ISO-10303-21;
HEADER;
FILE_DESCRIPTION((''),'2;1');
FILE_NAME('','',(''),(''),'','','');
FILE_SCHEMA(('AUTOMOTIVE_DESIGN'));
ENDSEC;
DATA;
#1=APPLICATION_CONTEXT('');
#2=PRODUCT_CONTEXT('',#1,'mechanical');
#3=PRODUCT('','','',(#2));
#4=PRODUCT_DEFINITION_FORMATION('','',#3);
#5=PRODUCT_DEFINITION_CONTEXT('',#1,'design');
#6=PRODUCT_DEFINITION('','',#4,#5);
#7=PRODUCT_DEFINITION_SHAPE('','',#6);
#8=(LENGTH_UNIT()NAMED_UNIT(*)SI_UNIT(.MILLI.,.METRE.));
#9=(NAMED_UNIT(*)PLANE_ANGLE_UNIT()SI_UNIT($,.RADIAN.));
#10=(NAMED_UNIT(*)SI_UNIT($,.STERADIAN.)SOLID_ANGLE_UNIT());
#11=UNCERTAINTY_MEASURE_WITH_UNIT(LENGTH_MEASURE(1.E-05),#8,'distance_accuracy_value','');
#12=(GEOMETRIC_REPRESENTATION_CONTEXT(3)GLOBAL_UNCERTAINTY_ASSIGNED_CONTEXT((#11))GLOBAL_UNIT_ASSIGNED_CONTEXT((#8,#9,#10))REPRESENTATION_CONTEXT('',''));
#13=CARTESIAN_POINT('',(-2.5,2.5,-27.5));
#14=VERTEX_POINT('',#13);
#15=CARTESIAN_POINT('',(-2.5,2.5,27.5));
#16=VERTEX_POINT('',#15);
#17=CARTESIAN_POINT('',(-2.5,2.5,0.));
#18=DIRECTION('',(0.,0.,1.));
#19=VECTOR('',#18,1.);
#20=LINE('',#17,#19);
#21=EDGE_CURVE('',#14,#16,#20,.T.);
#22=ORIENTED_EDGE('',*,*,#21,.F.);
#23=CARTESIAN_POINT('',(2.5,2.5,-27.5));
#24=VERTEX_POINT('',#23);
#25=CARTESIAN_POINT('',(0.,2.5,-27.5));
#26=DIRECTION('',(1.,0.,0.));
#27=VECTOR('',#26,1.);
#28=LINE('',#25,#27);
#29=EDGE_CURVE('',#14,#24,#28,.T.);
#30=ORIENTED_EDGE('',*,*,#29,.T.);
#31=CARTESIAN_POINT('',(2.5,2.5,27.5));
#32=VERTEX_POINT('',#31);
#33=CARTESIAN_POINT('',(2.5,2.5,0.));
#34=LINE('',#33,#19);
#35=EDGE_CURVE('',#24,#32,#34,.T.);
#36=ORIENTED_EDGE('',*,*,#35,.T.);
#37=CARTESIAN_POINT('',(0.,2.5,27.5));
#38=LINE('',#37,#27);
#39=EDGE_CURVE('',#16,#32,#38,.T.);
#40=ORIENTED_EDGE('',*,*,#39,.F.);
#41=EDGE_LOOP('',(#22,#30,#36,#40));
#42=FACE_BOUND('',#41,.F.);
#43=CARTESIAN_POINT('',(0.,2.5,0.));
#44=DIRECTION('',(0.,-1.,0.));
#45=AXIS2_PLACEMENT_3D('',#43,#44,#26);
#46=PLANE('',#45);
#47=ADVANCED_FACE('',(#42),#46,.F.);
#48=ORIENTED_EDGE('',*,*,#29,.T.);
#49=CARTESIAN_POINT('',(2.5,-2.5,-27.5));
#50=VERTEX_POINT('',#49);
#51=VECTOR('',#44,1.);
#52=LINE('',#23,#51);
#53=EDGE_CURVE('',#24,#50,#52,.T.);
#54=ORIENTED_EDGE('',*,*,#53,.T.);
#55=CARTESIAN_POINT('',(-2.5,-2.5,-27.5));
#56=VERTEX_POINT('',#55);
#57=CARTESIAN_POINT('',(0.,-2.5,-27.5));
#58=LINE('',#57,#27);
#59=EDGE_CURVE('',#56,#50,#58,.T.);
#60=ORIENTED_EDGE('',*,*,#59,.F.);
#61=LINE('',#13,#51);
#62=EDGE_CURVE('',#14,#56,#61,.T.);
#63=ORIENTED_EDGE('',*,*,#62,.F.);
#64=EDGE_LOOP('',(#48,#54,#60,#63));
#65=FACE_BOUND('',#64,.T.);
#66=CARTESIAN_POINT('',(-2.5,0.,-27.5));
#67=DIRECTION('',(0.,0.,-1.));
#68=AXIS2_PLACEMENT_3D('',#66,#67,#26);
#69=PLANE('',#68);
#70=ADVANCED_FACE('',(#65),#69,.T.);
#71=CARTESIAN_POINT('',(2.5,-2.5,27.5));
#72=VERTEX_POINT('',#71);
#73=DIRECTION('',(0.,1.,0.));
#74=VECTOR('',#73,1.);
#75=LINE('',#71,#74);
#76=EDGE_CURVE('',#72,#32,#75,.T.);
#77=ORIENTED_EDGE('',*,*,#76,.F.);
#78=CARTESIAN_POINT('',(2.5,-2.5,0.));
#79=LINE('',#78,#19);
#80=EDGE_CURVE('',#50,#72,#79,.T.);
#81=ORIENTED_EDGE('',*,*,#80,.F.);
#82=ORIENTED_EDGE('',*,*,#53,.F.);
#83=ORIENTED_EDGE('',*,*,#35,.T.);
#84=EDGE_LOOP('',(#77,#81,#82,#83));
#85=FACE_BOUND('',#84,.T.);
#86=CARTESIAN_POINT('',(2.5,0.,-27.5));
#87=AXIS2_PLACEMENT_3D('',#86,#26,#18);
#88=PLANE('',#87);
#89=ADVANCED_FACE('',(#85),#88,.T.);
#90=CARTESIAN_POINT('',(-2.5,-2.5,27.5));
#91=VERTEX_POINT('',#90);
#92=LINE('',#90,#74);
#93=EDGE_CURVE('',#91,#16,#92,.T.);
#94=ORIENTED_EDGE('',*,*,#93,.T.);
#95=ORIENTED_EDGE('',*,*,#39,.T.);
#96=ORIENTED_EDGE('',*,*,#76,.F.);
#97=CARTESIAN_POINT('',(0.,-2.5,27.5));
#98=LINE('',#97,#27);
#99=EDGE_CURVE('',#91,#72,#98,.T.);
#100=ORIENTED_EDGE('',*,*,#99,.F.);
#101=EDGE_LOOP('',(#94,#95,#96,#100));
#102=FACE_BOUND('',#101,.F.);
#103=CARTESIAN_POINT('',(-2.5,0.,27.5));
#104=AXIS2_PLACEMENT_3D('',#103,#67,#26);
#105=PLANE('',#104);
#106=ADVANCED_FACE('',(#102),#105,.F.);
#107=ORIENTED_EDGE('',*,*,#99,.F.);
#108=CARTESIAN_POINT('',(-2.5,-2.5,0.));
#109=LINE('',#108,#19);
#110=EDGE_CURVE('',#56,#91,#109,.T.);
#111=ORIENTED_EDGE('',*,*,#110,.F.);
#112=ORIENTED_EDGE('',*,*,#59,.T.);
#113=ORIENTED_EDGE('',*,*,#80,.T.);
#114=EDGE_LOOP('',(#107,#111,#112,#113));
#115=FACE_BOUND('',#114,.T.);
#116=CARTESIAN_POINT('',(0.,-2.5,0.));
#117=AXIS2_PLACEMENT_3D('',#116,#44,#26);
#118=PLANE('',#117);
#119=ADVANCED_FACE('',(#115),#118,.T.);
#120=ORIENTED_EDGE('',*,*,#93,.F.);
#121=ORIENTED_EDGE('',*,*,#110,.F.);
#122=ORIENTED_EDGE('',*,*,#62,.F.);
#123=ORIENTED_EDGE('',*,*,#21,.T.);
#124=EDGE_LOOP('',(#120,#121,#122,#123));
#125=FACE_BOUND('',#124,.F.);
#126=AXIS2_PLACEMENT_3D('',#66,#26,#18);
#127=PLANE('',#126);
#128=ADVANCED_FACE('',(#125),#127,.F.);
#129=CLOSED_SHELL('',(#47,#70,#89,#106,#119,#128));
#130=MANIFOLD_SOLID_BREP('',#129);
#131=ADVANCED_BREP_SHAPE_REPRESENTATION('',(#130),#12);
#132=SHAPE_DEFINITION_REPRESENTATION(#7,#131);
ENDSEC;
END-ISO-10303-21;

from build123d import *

# Parameters (mm, degrees)
F0_W          = 5
F0_H          = 55
F1_DEPTH      = 2.5
F1_DEPTH_BACK = 2.5


# Not quite as in the source:
# - the program builds the solid bodies; features that only make, move or delete a surface that nothing else refers to are left out


with BuildPart() as f1:
    # F0 (on Front) → F1 (new body, two sides)
    with BuildSketch(Plane.XZ) as f1_sk:
        Rectangle(F0_W, F0_H)
    extrude(amount=F1_DEPTH)
    extrude(f1_sk.sketch, amount=-F1_DEPTH_BACK)


solid = f1.part
